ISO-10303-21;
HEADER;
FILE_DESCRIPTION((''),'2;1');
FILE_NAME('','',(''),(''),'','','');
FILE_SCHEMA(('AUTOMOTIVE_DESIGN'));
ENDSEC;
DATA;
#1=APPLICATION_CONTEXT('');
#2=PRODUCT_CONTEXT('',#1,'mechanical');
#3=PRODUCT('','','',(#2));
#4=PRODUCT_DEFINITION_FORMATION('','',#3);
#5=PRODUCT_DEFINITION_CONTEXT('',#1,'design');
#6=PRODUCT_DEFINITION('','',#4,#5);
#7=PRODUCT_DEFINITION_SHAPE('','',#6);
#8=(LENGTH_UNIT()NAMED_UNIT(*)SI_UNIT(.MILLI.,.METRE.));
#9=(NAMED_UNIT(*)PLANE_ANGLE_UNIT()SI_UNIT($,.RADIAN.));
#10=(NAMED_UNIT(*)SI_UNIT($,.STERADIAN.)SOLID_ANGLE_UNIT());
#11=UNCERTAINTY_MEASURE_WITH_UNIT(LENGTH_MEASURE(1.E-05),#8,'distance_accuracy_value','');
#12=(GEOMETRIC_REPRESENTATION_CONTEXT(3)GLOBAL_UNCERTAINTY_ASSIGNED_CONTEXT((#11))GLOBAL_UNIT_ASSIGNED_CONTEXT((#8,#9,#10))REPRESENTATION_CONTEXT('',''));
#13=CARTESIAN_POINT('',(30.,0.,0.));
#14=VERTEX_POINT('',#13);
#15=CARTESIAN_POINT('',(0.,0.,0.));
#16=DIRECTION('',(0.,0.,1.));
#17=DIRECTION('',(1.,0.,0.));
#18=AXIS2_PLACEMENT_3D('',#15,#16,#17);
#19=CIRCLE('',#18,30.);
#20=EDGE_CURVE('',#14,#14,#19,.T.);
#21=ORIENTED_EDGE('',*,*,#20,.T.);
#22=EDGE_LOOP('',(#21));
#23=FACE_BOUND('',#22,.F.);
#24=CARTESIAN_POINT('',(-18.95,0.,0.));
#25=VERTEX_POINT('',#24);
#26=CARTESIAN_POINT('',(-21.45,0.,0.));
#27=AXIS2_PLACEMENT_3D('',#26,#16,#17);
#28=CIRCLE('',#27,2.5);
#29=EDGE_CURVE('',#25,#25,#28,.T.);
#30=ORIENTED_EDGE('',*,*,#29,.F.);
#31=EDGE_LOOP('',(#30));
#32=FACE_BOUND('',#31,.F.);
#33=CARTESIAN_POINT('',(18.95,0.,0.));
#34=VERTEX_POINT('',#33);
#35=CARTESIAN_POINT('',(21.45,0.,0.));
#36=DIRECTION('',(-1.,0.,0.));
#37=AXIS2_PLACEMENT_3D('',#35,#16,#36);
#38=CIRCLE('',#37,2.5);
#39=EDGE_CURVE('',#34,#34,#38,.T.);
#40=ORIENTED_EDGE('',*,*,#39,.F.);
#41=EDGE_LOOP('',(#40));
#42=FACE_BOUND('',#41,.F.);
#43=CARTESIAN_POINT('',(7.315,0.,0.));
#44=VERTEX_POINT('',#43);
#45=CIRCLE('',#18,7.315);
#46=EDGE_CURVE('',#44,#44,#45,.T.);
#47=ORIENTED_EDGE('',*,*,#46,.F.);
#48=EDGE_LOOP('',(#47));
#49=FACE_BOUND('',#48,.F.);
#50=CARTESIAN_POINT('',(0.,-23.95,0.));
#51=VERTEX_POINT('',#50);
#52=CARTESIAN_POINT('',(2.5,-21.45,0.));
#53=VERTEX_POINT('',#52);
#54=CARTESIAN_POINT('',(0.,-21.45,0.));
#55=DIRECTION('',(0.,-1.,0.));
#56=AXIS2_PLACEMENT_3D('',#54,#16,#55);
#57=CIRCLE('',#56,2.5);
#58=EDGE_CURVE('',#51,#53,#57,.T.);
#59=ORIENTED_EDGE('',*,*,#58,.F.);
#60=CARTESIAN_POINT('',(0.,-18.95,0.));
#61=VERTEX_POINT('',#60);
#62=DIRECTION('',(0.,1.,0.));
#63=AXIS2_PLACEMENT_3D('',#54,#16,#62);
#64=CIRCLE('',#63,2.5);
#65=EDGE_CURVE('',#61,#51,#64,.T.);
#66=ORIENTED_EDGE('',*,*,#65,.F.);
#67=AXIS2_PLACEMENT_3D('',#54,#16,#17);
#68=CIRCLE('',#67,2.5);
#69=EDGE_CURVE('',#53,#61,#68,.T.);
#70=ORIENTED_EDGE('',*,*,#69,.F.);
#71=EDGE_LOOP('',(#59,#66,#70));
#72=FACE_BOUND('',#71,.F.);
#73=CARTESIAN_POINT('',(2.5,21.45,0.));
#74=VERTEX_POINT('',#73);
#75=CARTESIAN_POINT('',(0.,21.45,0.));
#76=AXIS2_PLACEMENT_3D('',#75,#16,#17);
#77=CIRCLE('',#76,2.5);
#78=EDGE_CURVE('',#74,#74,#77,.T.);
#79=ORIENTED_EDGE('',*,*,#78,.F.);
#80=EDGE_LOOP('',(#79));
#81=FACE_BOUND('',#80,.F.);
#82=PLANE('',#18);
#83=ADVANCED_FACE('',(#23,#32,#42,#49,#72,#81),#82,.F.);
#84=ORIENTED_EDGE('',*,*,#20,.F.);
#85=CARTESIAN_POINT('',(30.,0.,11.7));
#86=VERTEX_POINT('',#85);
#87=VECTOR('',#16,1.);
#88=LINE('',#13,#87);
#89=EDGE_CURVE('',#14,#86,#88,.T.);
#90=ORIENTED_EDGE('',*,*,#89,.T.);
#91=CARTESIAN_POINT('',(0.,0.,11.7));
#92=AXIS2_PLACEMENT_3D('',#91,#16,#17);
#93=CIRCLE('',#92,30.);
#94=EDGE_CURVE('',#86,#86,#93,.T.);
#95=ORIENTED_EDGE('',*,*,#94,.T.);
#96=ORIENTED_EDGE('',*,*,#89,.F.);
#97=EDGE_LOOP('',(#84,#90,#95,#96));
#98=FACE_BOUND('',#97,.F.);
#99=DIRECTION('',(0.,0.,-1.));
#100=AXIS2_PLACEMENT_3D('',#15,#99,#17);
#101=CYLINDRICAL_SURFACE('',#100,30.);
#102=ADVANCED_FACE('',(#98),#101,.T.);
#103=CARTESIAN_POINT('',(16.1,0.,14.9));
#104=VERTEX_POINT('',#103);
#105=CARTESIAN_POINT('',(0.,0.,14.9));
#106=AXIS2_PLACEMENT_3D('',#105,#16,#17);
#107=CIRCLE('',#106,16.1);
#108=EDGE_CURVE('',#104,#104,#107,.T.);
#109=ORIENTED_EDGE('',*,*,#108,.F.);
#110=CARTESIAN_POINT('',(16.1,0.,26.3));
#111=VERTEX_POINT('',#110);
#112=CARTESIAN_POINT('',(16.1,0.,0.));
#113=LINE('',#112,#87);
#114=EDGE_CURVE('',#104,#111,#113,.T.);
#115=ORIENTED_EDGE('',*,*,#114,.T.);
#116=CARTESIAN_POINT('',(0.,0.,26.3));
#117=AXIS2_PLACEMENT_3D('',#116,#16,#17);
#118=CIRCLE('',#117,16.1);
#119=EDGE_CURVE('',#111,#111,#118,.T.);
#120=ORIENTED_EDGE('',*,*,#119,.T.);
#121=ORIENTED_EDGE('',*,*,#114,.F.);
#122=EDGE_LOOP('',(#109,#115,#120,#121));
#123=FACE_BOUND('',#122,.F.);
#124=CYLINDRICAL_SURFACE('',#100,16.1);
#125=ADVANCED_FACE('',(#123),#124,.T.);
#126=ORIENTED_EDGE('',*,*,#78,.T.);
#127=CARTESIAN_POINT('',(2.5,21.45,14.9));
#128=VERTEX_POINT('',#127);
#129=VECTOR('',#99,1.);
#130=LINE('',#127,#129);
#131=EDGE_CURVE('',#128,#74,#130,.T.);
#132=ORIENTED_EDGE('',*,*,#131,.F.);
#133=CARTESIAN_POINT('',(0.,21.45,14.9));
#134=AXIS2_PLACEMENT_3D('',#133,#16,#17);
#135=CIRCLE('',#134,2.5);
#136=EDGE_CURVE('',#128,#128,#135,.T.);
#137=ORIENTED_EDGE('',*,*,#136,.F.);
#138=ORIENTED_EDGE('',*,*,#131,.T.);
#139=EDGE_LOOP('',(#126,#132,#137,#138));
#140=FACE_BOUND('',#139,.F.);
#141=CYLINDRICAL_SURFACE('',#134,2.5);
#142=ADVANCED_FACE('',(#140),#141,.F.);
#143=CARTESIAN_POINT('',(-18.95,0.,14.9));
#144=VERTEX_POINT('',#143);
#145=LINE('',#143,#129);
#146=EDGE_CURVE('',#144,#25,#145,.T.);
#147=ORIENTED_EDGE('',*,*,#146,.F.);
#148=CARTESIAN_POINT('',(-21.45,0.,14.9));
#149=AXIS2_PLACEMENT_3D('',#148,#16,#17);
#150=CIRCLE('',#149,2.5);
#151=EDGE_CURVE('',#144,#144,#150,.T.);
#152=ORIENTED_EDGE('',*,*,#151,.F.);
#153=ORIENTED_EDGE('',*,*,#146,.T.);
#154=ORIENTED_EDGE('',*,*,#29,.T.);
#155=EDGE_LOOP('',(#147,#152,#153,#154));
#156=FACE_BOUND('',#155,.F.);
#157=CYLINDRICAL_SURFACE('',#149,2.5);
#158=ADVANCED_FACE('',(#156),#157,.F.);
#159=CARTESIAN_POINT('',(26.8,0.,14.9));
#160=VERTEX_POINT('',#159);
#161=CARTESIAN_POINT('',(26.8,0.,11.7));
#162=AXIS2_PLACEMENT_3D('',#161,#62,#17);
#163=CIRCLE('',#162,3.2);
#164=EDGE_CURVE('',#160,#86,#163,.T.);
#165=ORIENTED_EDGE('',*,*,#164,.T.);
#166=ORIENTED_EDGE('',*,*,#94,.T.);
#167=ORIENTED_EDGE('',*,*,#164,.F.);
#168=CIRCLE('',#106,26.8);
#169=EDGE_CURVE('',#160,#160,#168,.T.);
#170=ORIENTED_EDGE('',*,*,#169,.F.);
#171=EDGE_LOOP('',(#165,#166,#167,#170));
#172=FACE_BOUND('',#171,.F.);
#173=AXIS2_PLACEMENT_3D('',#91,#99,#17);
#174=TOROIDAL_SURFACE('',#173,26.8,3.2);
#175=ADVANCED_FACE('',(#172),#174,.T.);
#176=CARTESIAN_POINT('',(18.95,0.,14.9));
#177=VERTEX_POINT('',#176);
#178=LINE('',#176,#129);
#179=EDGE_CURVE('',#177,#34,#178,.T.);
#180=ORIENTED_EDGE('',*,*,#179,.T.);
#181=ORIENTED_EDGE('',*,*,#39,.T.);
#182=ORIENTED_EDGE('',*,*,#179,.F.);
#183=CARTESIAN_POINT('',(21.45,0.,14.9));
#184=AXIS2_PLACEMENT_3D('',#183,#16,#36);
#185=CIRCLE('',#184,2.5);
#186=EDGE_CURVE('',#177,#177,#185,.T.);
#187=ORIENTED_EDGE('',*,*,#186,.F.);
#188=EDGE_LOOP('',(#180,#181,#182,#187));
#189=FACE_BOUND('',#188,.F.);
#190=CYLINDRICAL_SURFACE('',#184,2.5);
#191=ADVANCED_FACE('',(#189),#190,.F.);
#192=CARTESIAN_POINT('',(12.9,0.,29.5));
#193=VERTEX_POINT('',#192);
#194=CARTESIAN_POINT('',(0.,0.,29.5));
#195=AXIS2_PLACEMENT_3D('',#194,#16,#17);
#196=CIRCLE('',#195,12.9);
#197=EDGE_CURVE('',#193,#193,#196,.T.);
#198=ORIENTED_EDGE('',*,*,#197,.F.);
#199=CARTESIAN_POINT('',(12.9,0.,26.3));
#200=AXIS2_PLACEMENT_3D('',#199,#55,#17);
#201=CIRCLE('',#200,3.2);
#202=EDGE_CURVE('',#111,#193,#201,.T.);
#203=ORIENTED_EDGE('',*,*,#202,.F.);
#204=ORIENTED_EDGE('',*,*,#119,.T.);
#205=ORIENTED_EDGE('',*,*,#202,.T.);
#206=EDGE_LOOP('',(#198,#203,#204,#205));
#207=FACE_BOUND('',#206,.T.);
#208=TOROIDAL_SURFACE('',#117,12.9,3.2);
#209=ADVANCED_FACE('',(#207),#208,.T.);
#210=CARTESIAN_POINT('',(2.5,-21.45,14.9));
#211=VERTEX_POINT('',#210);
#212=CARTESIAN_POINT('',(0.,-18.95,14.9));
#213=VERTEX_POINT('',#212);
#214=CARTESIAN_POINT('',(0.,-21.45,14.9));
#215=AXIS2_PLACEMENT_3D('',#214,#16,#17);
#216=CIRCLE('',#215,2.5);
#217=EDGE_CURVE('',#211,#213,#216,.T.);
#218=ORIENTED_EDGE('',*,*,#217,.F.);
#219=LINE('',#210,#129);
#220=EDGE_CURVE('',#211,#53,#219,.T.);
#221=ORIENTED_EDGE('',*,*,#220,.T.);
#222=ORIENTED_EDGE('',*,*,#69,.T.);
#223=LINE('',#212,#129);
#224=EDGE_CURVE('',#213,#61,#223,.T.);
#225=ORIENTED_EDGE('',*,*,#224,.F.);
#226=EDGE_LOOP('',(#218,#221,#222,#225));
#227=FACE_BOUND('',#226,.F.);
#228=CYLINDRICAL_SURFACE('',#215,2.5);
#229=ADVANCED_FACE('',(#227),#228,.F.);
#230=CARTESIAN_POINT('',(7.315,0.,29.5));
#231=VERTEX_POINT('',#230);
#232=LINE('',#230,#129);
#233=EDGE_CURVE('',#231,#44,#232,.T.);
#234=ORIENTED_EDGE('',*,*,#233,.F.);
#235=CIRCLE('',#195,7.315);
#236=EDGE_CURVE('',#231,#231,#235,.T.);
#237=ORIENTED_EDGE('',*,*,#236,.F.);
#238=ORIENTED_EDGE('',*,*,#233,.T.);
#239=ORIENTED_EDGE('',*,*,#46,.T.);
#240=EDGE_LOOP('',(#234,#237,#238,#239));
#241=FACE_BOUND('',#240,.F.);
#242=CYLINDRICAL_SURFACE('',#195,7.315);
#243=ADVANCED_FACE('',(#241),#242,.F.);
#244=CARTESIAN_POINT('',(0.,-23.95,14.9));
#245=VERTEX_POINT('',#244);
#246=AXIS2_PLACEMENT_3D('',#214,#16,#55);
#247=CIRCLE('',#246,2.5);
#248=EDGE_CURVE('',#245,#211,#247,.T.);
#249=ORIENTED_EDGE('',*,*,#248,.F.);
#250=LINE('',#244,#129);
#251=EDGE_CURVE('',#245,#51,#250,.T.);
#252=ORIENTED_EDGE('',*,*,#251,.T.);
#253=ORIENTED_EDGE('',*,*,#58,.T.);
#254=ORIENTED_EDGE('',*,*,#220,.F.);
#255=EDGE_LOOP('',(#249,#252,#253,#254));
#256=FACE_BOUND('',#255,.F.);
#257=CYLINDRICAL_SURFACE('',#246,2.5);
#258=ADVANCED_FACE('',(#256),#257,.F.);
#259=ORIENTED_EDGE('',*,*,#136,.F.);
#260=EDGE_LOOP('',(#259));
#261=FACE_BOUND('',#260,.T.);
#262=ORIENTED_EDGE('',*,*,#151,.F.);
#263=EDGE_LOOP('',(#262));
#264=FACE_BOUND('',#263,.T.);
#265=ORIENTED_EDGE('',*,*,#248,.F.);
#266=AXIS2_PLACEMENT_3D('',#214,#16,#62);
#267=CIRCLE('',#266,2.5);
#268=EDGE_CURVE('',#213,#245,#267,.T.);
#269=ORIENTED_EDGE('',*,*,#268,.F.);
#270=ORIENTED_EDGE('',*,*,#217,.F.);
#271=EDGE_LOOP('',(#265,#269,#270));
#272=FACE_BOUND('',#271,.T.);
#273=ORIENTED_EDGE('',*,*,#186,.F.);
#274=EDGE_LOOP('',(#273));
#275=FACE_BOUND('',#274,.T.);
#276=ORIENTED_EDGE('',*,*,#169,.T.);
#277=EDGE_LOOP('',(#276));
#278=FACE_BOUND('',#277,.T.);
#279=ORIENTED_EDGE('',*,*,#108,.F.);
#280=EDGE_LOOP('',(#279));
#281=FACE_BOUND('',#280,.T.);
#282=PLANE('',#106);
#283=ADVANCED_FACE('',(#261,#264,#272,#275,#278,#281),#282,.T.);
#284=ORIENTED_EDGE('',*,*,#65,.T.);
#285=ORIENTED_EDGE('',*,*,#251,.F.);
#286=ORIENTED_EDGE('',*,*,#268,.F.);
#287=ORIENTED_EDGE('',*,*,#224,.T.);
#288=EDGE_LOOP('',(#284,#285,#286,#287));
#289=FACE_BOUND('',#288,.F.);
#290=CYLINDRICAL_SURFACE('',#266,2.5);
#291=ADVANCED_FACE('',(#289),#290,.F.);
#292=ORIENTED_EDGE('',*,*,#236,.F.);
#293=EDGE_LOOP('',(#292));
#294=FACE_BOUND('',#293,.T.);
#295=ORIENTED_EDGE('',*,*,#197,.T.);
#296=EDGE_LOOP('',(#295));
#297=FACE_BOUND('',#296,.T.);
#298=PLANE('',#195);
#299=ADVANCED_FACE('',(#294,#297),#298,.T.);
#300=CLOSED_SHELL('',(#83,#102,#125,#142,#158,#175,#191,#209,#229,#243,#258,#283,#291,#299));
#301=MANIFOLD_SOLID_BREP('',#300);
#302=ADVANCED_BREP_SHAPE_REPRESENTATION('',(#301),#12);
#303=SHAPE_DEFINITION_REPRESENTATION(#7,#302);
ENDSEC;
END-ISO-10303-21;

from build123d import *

# Parameters (mm, degrees)
F0_R     = 30
F0_R_2   = 16.1
F1_DEPTH = 14.9
F2_DEPTH = 29.5
F3_R     = 3.2
F4_R     = 3.2
F5_R     = 2.5
F6_DEPTH = 100
F7_R     = 7.315
F8_DEPTH = 100


with BuildPart() as f1:
    # F0 (on Top) → F1 (new body)
    with BuildSketch(Plane.XY):
        Circle(F0_R)
        Circle(F0_R_2, mode=Mode.SUBTRACT)
    extrude(amount=F1_DEPTH)

    # F0 (on Top) → F2 (join)
    with BuildSketch(Plane.XY):
        Circle(F0_R_2)
    extrude(amount=F2_DEPTH)

    # F3
    f3_edges = [f1.edges().sort_by_distance(p)[0] for p in [
        (-30, 0, 14.9),
    ]]
    fillet(f3_edges, radius=F3_R)

    # F4
    f4_edges = [f1.edges().sort_by_distance(p)[0] for p in [
        (-16.1, 0, 29.5),
    ]]
    fillet(f4_edges, radius=F4_R)

    # F5 (on face) → F6 (cut)
    with BuildSketch(Plane.XY.offset(14.9)):
        with Locations((0, 21.45)):
            Circle(F5_R)
        with BuildLine():
            ThreePointArc((23.95, 0), (21.45, 2.5), (18.95, 0))
            ThreePointArc((18.95, 0), (21.45, -2.5), (23.95, 0))
        make_face()
        with BuildLine():
            ThreePointArc((2.5, -21.45), (1.767766953, -19.682233047), (0, -18.95))
            ThreePointArc((0, -18.95), (-2.5, -21.45), (0, -23.95))
            ThreePointArc((0, -23.95), (1.767766953, -23.217766953), (2.5, -21.45))
        make_face()
        with Locations((-21.45, 0)):
            Circle(F5_R)
    extrude(amount=-F6_DEPTH, mode=Mode.SUBTRACT)

    # F7 (on face) → F8 (cut)
    with BuildSketch(Plane.XY.offset(29.5)):
        Circle(F7_R)
    extrude(amount=-F8_DEPTH, mode=Mode.SUBTRACT)


solid = f1.part
